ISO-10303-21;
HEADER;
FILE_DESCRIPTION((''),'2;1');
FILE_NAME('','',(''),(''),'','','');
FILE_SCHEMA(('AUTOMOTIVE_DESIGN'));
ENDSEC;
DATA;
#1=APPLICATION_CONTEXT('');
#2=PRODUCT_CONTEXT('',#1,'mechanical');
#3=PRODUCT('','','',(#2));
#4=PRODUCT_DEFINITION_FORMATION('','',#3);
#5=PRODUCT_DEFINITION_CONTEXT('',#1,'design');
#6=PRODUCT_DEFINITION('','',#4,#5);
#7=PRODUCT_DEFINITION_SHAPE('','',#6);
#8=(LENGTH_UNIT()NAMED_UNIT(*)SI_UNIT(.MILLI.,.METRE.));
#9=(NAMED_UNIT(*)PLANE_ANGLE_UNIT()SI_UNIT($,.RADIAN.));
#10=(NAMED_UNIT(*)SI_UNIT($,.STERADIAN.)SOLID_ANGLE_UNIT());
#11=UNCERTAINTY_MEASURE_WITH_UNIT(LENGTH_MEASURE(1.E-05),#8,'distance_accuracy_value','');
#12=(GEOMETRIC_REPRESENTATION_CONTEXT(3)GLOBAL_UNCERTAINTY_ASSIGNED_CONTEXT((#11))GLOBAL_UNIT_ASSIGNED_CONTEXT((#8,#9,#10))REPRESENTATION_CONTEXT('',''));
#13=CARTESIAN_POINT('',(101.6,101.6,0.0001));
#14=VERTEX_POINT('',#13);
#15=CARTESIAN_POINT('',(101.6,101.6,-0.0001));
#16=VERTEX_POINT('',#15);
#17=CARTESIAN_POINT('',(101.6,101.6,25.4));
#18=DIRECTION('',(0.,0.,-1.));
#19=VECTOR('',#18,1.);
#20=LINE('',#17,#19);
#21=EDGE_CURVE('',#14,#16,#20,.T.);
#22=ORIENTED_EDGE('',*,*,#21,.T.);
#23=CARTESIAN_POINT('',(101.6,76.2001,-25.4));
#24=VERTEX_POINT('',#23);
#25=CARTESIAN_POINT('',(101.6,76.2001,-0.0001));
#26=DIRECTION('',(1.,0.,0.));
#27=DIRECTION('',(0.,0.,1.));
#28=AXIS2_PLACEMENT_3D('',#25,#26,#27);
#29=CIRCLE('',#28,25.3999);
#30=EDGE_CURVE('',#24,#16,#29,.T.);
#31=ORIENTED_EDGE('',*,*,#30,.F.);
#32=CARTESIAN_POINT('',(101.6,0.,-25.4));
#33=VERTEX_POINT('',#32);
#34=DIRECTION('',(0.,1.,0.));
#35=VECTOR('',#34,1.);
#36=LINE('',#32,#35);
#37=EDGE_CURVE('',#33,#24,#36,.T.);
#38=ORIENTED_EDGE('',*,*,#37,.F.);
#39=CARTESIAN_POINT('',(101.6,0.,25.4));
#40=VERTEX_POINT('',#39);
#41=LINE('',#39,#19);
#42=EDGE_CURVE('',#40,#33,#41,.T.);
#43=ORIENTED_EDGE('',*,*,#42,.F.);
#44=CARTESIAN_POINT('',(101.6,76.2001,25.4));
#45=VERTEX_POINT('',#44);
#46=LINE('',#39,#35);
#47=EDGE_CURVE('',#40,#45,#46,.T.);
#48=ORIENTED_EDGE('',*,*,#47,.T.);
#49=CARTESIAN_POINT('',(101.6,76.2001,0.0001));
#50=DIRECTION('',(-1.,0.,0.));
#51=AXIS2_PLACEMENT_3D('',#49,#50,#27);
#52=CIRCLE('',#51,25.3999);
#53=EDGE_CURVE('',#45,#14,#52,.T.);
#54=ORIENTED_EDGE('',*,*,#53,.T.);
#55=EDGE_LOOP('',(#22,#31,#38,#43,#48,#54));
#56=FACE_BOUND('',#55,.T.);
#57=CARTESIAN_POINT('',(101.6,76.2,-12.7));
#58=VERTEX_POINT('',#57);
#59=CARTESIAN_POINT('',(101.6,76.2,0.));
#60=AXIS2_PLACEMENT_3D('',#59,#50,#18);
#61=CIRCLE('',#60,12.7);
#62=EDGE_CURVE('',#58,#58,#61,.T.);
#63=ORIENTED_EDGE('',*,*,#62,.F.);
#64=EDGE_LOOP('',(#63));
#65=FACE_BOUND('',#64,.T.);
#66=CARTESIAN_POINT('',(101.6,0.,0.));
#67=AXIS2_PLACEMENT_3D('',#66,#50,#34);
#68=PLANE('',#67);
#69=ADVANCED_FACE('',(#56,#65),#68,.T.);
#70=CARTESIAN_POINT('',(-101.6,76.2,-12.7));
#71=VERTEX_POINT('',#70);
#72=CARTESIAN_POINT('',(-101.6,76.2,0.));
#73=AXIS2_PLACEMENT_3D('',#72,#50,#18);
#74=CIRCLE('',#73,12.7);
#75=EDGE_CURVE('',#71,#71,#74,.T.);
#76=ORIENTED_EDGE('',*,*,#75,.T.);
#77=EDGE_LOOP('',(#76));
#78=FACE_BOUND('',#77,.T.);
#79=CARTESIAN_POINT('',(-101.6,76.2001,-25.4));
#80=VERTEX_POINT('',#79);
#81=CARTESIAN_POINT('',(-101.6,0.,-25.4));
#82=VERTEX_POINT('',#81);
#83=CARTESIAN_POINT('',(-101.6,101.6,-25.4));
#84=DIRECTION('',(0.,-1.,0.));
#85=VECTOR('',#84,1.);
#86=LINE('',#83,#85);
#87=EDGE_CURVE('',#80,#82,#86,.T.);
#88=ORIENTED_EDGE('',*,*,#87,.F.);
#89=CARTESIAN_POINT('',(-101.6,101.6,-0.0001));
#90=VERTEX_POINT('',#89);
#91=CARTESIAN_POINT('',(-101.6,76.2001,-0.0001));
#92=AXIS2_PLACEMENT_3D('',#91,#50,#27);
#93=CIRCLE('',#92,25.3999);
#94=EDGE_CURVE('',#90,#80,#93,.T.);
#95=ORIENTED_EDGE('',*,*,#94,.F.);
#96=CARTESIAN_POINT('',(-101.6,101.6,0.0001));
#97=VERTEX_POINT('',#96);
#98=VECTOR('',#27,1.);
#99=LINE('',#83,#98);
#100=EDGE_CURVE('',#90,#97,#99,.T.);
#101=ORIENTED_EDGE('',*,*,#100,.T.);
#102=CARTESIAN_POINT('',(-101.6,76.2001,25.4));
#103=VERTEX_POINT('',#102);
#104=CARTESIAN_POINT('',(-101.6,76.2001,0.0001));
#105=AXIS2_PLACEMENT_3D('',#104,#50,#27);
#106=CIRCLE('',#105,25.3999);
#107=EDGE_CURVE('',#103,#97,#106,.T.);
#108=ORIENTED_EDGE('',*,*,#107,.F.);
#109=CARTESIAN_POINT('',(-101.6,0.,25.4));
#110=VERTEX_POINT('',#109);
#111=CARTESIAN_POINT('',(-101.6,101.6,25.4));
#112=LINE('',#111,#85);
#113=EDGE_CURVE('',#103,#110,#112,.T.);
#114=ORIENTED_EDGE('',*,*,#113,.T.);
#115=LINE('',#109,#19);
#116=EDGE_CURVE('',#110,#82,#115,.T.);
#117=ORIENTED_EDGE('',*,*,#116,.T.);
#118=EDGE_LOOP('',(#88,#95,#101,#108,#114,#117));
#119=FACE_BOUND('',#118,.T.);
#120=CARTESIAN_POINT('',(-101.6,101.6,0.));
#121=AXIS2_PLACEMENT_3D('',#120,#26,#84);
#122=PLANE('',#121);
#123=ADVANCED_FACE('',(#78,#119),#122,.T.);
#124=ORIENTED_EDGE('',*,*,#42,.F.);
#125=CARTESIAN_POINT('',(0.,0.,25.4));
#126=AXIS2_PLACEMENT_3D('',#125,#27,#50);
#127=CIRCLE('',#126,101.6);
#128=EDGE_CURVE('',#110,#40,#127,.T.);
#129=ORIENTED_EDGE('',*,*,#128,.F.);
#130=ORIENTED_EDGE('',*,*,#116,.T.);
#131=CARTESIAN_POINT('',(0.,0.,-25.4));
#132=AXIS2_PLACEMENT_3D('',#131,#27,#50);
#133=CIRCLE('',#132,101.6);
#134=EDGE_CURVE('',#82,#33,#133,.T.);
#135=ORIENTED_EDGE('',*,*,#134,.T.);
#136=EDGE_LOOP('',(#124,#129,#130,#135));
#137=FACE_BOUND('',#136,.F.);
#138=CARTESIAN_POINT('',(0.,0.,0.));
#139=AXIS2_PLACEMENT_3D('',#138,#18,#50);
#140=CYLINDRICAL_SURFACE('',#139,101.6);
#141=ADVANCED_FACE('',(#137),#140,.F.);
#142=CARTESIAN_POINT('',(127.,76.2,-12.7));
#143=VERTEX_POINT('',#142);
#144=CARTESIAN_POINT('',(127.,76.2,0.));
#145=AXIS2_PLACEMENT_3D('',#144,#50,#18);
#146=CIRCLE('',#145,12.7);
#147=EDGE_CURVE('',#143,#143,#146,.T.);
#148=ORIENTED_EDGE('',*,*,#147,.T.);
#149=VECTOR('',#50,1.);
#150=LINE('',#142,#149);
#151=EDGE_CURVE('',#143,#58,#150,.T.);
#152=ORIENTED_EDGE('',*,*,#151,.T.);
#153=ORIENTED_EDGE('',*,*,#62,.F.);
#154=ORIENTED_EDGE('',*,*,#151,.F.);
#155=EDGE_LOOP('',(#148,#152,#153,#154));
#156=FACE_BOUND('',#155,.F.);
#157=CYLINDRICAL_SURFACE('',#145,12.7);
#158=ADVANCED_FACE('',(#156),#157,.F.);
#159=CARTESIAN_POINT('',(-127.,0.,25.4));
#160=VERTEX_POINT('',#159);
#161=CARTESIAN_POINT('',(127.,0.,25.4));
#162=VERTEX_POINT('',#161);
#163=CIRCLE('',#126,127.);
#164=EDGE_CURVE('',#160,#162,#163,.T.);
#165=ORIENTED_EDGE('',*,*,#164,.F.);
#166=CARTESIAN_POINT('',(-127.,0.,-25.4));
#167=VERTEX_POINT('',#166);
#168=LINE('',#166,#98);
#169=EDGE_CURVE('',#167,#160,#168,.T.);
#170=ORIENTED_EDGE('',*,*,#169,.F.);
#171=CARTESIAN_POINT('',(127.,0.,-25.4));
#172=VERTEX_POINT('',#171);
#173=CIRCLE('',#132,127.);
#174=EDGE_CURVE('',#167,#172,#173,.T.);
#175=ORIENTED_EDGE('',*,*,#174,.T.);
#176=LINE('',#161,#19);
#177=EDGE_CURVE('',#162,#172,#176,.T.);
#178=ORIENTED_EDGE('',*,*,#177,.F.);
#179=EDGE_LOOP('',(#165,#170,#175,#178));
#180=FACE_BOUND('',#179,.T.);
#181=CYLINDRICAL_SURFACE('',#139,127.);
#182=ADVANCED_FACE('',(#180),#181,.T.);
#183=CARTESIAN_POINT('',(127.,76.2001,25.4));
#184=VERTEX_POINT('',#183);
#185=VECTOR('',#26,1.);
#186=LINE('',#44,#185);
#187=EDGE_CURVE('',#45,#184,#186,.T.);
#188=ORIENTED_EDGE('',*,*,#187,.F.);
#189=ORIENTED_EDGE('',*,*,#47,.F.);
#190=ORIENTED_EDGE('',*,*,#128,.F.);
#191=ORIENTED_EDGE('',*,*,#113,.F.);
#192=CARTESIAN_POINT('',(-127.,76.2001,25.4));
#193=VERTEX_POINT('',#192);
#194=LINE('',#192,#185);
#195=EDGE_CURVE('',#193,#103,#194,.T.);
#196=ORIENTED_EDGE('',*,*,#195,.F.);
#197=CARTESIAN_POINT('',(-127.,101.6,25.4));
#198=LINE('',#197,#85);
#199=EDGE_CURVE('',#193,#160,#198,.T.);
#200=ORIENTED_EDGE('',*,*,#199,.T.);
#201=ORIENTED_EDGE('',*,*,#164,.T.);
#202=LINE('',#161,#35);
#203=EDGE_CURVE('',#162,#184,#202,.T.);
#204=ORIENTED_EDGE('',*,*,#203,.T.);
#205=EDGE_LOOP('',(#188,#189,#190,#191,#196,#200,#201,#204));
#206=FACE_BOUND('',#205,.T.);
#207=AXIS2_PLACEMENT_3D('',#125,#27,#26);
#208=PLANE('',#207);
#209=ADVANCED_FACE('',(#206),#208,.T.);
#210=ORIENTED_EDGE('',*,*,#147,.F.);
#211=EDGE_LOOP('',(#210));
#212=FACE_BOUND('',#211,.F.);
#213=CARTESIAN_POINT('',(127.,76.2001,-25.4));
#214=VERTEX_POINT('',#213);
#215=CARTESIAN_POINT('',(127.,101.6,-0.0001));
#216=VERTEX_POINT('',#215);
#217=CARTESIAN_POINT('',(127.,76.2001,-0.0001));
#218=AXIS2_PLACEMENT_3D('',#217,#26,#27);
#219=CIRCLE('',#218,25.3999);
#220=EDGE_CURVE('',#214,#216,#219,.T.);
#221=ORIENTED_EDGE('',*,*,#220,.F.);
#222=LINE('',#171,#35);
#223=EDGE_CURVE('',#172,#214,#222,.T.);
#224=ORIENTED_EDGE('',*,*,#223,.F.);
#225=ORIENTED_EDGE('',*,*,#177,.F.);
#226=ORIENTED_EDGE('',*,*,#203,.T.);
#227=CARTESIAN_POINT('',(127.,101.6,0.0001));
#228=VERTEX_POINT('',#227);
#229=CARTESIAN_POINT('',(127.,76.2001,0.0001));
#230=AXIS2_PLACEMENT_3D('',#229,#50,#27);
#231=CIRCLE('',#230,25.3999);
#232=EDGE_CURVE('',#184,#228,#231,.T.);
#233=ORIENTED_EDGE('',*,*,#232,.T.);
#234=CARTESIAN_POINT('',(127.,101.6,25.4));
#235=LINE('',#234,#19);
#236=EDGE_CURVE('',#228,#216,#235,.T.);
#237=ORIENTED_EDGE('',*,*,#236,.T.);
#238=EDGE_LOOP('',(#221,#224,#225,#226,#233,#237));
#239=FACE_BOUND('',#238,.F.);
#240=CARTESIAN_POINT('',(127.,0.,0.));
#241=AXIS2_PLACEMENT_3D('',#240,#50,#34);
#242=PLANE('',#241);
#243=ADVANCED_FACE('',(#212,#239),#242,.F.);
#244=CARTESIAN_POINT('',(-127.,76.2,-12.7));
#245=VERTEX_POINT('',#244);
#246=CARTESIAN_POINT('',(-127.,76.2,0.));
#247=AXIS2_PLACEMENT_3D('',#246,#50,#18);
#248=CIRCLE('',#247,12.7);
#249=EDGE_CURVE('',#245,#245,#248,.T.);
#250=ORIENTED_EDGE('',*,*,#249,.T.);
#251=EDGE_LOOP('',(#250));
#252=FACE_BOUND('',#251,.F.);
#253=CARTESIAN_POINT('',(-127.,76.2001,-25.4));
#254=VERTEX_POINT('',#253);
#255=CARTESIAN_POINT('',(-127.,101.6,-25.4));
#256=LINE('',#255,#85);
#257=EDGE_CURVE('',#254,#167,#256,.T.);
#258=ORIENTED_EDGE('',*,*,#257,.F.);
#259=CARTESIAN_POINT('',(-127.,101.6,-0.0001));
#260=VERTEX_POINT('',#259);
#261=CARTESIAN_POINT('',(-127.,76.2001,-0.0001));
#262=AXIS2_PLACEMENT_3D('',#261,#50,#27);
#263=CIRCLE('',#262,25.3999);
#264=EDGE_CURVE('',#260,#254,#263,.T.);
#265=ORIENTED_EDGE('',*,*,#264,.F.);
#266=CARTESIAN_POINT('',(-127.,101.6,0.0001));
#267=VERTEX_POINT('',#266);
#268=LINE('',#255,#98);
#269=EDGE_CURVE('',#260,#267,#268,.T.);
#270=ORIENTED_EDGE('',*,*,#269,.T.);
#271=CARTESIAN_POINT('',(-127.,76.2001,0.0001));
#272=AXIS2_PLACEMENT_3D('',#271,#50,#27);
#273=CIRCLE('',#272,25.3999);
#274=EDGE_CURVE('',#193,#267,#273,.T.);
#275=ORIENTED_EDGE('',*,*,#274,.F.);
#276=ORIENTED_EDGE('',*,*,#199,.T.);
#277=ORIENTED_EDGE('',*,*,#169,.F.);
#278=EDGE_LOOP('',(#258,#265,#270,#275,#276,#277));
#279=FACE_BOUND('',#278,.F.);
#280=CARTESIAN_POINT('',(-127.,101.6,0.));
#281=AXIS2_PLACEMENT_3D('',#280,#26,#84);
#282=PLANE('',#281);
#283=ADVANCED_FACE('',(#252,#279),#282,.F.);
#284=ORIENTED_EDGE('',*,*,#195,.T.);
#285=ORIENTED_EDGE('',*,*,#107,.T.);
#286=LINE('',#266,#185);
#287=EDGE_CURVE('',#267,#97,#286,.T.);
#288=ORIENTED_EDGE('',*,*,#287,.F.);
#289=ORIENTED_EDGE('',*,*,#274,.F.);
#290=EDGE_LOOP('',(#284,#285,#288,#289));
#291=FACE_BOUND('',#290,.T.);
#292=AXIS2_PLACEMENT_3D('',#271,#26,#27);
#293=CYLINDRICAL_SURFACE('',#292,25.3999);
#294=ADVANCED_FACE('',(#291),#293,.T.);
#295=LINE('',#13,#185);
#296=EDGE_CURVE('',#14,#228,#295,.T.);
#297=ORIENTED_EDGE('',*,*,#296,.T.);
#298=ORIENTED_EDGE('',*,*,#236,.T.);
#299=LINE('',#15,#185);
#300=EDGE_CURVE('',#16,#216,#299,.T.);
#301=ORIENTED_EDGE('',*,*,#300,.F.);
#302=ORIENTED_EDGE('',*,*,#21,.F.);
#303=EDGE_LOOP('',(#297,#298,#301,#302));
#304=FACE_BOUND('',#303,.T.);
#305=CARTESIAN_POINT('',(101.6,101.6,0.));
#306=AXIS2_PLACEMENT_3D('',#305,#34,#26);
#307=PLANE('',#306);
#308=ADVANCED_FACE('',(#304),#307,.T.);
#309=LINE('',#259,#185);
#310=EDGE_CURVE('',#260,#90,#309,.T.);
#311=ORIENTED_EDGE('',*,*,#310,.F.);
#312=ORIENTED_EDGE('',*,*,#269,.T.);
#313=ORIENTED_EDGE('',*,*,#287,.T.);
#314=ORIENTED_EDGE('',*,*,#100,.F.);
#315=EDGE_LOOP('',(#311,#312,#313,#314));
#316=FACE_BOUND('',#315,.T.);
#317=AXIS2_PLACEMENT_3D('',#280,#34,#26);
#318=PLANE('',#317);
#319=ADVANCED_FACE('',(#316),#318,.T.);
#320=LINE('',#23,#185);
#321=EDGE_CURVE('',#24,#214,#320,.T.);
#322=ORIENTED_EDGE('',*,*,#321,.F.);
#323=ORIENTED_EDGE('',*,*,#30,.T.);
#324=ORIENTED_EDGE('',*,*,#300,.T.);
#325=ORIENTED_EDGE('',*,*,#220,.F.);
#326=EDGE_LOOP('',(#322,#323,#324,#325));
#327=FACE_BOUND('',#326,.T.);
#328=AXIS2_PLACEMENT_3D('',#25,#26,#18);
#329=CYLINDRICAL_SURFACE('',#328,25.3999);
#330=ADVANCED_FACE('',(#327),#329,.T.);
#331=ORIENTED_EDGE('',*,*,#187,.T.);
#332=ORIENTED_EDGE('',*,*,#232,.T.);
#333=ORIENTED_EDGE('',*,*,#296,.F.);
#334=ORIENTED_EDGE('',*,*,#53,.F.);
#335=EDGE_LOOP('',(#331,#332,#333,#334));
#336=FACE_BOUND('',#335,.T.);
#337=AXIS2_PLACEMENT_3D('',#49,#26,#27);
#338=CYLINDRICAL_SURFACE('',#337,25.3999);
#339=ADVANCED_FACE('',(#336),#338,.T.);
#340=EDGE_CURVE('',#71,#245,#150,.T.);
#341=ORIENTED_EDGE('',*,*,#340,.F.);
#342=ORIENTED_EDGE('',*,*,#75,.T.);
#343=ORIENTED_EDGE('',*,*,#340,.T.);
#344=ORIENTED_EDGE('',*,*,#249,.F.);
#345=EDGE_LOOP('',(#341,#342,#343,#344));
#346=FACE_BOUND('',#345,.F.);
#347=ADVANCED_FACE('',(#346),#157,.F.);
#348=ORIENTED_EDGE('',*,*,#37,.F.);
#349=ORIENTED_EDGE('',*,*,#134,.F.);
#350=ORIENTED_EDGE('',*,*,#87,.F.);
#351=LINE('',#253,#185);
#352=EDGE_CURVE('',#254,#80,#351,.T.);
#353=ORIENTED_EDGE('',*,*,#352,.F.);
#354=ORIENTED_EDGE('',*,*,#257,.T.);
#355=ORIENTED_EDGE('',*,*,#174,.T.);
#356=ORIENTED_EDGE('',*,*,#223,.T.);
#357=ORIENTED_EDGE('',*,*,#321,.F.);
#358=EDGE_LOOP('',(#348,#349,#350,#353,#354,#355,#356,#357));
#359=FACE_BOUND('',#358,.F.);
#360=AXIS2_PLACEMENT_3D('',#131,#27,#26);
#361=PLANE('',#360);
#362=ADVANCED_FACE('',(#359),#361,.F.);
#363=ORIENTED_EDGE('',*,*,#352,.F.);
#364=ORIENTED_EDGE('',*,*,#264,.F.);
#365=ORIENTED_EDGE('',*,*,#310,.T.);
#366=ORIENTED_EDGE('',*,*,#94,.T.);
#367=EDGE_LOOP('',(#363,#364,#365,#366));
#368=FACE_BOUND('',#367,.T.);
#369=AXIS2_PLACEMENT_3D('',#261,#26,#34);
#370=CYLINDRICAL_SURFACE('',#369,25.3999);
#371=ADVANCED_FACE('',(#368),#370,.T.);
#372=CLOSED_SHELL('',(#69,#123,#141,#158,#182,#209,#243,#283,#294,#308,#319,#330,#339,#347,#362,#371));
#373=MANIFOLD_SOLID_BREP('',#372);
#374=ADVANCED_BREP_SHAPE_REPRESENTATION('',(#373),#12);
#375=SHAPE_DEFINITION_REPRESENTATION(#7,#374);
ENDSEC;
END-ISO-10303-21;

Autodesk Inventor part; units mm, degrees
ref_plane "YZ Plane" through (0, 0, 0) normal (1, 0, 0) x (0, 1, 0)
ref_plane "XZ Plane" through (0, 0, 0) normal (0, 1, 0) x (-1, 0, 0)
ref_plane "XY Plane" through (0, 0, 0) normal (0, 0, 1) x (1, 0, 0)
sketch "Sketch1" plane through (0, 0, 0) normal (0, 0, 1) x (1, 0, 0)
  line L0 (-101.6, 101.6) -> (-101.6, 0)
  arc A0 (-101.6, 0) -> (101.6, 0) centre (0, 0) ccw
  line L1 (101.6, 0) -> (101.6, 101.6)
  line L2 (-127, 101.6) -> (-127, 0)
  arc A1 (-127, 0) -> (127, 0) centre (0, 0) ccw
  line L3 (127, 0) -> (127, 101.6)
  line L4 (-127, 101.6) -> (-101.6, 101.6)
  line L5 (101.6, 101.6) -> (127, 101.6)
  dimension "d0" = 101.6
  dimension "d1" = 101.6
  dimension "d2" = 25.4
extrude "Extrusion1" add sketch "Sketch1" along normal mid plane 50.8
full round fillet "Fillet1" first side at (-110.0667, 33.8667, 25.4) centre faces at (110.0667, 101.6, -8.4667) second side at (-110.0667, 33.8667, -25.4)
full round fillet "Fillet2" first side at (-118.5333, 33.8667, 25.4) centre faces at (-118.5333, 101.6, 8.4667) second side at (-118.5333, 33.8667, -25.4)
hole "Hole1" at (127, 76.2, 0) direction (-1, 0, 0) diameter 25.4 end through all
properties part number "Forl"
